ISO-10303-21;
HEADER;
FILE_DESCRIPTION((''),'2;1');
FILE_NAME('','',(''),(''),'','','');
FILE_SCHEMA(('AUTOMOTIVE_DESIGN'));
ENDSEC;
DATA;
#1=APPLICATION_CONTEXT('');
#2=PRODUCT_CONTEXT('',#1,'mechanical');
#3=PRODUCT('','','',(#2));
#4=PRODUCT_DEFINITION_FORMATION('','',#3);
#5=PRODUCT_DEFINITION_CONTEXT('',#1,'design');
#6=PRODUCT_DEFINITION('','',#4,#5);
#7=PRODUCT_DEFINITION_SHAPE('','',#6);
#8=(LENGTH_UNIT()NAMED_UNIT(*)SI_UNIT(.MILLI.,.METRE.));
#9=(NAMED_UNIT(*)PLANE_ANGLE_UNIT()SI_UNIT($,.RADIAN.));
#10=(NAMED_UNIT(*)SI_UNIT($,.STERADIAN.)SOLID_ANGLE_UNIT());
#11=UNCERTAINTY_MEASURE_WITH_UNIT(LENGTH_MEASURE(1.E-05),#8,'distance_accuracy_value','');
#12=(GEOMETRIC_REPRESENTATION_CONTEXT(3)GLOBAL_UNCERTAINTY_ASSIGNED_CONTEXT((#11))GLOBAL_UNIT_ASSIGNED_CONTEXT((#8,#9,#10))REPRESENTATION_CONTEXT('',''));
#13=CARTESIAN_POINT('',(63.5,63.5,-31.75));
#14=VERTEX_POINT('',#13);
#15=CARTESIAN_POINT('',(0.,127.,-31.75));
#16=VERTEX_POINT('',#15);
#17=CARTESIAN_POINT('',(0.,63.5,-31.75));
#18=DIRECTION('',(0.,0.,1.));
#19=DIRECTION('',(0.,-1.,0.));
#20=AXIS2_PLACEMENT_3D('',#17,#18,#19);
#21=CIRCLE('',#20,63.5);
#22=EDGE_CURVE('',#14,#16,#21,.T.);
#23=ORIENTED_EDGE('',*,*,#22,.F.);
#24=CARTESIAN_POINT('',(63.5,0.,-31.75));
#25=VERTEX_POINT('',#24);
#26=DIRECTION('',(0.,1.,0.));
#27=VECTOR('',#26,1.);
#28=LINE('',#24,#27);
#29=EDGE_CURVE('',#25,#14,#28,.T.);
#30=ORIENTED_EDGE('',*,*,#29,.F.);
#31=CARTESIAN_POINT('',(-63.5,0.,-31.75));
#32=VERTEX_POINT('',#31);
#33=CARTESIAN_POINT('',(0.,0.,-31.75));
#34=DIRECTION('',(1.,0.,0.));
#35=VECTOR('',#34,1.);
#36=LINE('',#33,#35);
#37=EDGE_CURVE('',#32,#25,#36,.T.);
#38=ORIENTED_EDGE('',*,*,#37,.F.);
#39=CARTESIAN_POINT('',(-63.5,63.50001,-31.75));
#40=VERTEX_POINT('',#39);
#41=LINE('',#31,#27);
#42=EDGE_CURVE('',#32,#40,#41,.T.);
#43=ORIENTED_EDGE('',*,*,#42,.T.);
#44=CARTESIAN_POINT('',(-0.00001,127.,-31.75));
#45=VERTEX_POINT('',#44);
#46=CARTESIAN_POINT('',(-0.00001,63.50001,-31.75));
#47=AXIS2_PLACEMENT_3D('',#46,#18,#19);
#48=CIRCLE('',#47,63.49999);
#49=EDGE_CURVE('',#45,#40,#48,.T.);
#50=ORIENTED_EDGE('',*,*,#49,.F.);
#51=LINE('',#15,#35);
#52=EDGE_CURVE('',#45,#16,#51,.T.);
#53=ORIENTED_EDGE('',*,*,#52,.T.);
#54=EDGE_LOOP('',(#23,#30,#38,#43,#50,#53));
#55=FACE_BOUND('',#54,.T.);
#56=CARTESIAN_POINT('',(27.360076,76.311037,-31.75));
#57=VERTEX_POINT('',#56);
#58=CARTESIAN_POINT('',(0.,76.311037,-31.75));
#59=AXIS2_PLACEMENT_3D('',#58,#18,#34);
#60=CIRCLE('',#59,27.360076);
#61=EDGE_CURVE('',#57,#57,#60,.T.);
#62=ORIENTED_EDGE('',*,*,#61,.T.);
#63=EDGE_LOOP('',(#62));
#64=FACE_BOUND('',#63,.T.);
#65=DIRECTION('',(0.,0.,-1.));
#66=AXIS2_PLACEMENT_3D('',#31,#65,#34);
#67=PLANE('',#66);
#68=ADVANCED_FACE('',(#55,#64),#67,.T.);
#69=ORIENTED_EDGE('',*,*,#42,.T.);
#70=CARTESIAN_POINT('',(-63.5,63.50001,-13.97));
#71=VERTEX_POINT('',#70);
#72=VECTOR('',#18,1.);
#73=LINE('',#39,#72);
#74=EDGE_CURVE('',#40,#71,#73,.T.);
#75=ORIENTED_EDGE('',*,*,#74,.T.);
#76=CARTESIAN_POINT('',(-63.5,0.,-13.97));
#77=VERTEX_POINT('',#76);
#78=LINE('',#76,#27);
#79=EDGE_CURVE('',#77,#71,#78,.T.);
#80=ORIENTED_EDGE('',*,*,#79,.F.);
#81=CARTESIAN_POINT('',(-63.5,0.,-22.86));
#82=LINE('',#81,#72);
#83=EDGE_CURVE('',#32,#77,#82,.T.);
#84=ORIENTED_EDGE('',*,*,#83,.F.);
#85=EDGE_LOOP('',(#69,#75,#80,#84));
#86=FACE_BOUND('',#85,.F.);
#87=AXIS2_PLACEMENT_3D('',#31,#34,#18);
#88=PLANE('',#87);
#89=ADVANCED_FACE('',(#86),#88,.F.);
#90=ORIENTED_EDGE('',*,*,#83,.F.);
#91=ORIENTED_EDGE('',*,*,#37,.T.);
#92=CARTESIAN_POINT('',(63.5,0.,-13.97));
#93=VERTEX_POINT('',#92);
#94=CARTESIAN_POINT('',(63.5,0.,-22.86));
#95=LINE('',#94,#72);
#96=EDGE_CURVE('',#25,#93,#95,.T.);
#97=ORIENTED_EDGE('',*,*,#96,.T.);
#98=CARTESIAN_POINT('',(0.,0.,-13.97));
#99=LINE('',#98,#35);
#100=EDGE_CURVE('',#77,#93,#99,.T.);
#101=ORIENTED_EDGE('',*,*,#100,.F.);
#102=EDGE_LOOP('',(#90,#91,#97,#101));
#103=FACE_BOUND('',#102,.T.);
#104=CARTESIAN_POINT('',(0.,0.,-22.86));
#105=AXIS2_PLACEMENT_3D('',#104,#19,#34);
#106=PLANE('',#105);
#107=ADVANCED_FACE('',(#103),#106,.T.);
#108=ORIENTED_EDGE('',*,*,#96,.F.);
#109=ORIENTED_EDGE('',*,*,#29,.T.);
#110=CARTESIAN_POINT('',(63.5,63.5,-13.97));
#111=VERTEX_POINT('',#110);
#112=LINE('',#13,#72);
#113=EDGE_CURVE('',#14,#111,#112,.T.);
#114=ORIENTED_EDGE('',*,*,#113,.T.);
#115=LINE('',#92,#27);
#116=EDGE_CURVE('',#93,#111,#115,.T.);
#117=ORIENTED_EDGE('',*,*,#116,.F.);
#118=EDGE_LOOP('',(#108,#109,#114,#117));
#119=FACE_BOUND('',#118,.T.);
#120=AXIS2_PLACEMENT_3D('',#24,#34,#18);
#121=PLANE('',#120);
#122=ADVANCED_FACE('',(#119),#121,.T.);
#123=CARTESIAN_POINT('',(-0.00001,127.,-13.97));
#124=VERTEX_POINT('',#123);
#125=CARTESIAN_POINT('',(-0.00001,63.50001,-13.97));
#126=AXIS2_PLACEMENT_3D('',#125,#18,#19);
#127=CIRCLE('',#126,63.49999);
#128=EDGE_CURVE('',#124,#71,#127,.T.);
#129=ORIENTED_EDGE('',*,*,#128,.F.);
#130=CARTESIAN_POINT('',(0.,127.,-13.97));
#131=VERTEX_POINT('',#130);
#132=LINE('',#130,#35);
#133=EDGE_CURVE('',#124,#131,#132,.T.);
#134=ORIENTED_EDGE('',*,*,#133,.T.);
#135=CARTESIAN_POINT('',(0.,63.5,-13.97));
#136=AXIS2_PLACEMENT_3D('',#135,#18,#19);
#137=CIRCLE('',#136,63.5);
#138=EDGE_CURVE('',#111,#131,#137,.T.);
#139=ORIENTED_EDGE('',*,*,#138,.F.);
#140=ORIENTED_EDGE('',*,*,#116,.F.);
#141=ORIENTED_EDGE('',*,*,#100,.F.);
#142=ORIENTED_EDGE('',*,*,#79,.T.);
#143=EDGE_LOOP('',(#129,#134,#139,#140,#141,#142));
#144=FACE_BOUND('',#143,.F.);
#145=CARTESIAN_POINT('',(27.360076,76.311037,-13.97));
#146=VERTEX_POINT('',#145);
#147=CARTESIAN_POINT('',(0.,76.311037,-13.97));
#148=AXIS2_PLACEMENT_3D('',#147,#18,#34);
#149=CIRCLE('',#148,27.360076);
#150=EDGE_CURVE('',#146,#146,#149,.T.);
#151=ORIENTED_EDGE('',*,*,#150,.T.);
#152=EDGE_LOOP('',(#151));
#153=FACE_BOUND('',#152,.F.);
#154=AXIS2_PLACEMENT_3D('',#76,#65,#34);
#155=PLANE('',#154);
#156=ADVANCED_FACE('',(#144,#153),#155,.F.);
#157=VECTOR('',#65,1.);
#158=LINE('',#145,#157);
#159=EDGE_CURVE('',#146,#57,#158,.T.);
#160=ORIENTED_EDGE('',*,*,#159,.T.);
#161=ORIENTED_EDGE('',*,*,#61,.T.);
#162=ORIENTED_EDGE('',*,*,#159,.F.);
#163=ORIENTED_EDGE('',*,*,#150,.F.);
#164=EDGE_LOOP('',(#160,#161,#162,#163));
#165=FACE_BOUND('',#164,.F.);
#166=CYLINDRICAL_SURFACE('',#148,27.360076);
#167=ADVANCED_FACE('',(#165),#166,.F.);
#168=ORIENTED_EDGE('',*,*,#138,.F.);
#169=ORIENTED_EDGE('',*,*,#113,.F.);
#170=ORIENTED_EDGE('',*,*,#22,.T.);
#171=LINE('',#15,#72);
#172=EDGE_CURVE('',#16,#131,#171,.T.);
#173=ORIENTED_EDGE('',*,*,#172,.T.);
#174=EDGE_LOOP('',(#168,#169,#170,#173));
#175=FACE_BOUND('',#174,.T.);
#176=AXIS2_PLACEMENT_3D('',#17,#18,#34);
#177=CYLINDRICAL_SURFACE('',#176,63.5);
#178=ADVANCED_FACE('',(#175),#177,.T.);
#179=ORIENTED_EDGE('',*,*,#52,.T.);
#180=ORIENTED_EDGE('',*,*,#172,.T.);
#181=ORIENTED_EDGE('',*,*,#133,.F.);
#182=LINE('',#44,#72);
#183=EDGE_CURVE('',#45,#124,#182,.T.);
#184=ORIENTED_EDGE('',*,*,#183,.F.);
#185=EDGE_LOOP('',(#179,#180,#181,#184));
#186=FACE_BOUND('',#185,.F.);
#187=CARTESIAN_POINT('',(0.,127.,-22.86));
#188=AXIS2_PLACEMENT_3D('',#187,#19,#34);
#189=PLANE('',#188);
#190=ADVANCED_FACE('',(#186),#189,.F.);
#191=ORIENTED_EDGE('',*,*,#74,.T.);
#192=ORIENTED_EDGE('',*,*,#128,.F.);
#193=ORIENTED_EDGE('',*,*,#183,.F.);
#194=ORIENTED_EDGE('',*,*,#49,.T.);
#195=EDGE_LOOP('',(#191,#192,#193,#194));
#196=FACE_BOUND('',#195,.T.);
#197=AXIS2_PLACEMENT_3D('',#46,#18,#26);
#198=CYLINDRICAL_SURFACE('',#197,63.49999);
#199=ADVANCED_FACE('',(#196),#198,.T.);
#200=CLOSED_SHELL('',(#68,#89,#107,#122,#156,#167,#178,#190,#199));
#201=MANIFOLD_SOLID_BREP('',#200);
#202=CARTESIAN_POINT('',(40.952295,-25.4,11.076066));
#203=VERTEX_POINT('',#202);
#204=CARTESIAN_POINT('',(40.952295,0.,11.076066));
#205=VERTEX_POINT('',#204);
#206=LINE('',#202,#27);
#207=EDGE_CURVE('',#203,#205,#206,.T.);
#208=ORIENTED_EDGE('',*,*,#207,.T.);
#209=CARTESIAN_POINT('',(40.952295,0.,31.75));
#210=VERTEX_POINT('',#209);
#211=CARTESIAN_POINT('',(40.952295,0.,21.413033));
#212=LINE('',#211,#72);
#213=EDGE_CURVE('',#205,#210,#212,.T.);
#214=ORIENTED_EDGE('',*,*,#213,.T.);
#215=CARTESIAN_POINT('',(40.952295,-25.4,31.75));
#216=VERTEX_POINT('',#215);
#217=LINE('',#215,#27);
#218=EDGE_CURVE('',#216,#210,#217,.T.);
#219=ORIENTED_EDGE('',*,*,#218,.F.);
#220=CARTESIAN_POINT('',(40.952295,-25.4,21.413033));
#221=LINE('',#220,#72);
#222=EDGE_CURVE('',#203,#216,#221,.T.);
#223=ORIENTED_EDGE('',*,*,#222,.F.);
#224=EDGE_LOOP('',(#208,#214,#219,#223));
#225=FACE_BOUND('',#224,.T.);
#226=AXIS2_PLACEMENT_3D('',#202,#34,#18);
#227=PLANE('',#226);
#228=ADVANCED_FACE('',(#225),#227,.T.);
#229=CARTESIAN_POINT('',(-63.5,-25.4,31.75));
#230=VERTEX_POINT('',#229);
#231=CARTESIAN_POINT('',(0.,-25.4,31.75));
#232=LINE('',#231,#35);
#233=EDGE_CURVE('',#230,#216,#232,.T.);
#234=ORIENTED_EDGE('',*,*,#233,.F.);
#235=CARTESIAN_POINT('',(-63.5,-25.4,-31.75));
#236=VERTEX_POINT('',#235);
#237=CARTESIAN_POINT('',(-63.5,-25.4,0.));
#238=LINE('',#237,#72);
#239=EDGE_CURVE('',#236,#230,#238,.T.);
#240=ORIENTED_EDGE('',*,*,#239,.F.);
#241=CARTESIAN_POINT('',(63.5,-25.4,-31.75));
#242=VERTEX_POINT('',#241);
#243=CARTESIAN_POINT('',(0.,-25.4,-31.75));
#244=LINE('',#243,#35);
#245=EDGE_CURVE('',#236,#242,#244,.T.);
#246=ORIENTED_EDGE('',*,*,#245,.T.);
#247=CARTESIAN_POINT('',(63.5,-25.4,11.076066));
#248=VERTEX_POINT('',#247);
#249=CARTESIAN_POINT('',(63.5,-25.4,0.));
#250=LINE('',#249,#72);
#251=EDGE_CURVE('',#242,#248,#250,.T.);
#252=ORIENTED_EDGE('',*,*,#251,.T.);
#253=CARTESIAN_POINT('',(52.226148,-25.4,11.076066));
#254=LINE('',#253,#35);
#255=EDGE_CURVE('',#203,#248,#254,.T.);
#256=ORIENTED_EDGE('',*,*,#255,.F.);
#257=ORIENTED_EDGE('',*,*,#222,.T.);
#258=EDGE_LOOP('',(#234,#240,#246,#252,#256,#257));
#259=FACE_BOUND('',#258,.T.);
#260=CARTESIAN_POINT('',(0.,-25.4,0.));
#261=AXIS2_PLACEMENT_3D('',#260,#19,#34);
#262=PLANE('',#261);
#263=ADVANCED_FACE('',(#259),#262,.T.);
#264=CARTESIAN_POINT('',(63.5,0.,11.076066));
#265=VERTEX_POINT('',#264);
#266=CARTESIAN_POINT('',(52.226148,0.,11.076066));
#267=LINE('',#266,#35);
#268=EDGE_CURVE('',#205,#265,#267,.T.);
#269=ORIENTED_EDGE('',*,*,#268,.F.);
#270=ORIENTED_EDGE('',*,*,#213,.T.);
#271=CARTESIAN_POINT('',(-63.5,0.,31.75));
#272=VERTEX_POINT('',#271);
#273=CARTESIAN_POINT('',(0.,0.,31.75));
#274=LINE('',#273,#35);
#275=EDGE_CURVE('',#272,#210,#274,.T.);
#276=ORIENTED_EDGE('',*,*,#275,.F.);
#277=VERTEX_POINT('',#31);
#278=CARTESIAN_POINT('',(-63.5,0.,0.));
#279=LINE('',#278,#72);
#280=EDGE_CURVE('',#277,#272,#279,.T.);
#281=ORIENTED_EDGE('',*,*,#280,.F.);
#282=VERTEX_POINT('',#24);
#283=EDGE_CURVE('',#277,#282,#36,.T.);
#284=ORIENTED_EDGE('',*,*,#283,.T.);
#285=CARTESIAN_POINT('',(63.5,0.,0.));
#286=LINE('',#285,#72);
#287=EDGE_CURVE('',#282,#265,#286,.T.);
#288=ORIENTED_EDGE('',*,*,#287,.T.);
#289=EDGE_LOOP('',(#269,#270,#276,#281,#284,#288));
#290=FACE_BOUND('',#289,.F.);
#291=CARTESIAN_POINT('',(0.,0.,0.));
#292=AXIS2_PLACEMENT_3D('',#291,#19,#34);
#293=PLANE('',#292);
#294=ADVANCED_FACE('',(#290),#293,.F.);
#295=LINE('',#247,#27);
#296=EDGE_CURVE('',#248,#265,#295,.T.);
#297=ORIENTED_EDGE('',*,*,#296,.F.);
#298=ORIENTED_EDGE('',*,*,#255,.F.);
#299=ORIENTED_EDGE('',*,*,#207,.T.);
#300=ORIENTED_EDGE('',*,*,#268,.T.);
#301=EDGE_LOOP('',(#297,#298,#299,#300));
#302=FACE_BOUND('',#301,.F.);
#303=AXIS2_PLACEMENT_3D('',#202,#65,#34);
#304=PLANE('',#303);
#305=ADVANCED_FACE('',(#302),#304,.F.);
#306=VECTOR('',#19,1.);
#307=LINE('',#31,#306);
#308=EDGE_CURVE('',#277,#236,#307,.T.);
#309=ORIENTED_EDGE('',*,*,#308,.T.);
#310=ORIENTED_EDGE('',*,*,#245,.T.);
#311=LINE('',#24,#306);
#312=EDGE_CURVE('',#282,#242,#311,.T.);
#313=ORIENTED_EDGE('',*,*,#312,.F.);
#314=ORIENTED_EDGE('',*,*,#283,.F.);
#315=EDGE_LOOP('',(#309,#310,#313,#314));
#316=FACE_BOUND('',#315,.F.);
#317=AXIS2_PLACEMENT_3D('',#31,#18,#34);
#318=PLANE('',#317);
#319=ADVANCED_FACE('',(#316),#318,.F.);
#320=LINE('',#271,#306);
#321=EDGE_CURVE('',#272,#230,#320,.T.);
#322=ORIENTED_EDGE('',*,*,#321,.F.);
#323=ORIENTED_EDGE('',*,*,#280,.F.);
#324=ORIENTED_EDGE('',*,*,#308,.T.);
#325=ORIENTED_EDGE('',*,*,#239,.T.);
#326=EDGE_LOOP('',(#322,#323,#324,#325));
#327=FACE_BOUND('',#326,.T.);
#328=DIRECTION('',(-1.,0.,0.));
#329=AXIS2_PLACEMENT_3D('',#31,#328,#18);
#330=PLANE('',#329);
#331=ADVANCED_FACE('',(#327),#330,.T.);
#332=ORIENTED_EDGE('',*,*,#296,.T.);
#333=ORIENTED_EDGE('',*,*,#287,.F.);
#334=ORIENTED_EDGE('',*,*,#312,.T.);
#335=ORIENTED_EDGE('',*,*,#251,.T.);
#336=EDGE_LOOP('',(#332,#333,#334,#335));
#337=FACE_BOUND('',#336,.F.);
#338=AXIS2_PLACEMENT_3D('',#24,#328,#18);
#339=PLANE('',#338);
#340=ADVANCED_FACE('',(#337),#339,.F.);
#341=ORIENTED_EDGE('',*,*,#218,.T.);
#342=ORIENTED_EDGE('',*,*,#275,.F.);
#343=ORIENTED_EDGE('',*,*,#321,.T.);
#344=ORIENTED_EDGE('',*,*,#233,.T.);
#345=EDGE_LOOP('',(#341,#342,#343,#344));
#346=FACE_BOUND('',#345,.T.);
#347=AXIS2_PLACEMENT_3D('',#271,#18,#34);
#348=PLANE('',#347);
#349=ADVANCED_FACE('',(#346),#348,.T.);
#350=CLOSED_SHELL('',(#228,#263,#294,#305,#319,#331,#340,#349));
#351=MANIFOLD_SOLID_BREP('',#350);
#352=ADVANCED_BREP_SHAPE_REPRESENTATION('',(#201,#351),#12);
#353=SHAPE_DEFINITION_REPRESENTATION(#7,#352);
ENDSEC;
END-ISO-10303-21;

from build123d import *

# Parameters (mm, degrees)
F0_W     = 127
F0_H     = 63.5
F1_DEPTH = 25.4
F2_W     = 22.5477049351
F2_H     = 20.6739342883
F3_DEPTH = 25.4
F4_W     = 127
F4_H     = 17.7800003439
F5_DEPTH = 127
F6_R     = 63.5
F7_R     = 63.49999
F8_R     = 27.3600762243
F9_DEPTH = 25.4


# Not quite as in the source:
# - a fillet or chamfer is up to 0.001 mm smaller than in the source, because OpenCascade refuses the exact size


with BuildPart() as f1:
    # F0 (on Front) → F1 (new body)
    with BuildSketch(Plane.XZ):
        Rectangle(F0_W, F0_H)
    extrude(amount=F1_DEPTH)

    # F2 (on face) → F3 (cut)
    with BuildSketch(Plane.XZ.offset(25.4)):
        with Locations((52.2261475325, 21.4130328558)):
            Rectangle(F2_W, F2_H)
    extrude(amount=-F3_DEPTH, mode=Mode.SUBTRACT)


with BuildPart() as f5:
    # F4 (on Front) → F5 (new body)
    with BuildSketch(Plane.XZ):
        with Locations((0, -22.859999828)):
            Rectangle(F4_W, F4_H)
    extrude(amount=-F5_DEPTH)

    # F6
    f6_edges = [f5.edges().sort_by_distance(p)[0] for p in [
        (63.5, 127, -22.86),
    ]]
    fillet(f6_edges, radius=F6_R)

    # F7 (radius 63.5 in the source; OpenCascade refuses exactly that, so slightly less here)
    f7_edges = [f5.edges().sort_by_distance(p)[0] for p in [
        (-63.5, 127, -22.86),
    ]]
    fillet(f7_edges, radius=F7_R)

    # F8 (on face) → F9 (cut)
    with BuildSketch(Plane.XY.offset(-13.9699996561)):
        with Locations((0, 76.3110369444)):
            Circle(F8_R)
    extrude(amount=-F9_DEPTH, mode=Mode.SUBTRACT)


solid = Compound([f1.part, f5.part])
